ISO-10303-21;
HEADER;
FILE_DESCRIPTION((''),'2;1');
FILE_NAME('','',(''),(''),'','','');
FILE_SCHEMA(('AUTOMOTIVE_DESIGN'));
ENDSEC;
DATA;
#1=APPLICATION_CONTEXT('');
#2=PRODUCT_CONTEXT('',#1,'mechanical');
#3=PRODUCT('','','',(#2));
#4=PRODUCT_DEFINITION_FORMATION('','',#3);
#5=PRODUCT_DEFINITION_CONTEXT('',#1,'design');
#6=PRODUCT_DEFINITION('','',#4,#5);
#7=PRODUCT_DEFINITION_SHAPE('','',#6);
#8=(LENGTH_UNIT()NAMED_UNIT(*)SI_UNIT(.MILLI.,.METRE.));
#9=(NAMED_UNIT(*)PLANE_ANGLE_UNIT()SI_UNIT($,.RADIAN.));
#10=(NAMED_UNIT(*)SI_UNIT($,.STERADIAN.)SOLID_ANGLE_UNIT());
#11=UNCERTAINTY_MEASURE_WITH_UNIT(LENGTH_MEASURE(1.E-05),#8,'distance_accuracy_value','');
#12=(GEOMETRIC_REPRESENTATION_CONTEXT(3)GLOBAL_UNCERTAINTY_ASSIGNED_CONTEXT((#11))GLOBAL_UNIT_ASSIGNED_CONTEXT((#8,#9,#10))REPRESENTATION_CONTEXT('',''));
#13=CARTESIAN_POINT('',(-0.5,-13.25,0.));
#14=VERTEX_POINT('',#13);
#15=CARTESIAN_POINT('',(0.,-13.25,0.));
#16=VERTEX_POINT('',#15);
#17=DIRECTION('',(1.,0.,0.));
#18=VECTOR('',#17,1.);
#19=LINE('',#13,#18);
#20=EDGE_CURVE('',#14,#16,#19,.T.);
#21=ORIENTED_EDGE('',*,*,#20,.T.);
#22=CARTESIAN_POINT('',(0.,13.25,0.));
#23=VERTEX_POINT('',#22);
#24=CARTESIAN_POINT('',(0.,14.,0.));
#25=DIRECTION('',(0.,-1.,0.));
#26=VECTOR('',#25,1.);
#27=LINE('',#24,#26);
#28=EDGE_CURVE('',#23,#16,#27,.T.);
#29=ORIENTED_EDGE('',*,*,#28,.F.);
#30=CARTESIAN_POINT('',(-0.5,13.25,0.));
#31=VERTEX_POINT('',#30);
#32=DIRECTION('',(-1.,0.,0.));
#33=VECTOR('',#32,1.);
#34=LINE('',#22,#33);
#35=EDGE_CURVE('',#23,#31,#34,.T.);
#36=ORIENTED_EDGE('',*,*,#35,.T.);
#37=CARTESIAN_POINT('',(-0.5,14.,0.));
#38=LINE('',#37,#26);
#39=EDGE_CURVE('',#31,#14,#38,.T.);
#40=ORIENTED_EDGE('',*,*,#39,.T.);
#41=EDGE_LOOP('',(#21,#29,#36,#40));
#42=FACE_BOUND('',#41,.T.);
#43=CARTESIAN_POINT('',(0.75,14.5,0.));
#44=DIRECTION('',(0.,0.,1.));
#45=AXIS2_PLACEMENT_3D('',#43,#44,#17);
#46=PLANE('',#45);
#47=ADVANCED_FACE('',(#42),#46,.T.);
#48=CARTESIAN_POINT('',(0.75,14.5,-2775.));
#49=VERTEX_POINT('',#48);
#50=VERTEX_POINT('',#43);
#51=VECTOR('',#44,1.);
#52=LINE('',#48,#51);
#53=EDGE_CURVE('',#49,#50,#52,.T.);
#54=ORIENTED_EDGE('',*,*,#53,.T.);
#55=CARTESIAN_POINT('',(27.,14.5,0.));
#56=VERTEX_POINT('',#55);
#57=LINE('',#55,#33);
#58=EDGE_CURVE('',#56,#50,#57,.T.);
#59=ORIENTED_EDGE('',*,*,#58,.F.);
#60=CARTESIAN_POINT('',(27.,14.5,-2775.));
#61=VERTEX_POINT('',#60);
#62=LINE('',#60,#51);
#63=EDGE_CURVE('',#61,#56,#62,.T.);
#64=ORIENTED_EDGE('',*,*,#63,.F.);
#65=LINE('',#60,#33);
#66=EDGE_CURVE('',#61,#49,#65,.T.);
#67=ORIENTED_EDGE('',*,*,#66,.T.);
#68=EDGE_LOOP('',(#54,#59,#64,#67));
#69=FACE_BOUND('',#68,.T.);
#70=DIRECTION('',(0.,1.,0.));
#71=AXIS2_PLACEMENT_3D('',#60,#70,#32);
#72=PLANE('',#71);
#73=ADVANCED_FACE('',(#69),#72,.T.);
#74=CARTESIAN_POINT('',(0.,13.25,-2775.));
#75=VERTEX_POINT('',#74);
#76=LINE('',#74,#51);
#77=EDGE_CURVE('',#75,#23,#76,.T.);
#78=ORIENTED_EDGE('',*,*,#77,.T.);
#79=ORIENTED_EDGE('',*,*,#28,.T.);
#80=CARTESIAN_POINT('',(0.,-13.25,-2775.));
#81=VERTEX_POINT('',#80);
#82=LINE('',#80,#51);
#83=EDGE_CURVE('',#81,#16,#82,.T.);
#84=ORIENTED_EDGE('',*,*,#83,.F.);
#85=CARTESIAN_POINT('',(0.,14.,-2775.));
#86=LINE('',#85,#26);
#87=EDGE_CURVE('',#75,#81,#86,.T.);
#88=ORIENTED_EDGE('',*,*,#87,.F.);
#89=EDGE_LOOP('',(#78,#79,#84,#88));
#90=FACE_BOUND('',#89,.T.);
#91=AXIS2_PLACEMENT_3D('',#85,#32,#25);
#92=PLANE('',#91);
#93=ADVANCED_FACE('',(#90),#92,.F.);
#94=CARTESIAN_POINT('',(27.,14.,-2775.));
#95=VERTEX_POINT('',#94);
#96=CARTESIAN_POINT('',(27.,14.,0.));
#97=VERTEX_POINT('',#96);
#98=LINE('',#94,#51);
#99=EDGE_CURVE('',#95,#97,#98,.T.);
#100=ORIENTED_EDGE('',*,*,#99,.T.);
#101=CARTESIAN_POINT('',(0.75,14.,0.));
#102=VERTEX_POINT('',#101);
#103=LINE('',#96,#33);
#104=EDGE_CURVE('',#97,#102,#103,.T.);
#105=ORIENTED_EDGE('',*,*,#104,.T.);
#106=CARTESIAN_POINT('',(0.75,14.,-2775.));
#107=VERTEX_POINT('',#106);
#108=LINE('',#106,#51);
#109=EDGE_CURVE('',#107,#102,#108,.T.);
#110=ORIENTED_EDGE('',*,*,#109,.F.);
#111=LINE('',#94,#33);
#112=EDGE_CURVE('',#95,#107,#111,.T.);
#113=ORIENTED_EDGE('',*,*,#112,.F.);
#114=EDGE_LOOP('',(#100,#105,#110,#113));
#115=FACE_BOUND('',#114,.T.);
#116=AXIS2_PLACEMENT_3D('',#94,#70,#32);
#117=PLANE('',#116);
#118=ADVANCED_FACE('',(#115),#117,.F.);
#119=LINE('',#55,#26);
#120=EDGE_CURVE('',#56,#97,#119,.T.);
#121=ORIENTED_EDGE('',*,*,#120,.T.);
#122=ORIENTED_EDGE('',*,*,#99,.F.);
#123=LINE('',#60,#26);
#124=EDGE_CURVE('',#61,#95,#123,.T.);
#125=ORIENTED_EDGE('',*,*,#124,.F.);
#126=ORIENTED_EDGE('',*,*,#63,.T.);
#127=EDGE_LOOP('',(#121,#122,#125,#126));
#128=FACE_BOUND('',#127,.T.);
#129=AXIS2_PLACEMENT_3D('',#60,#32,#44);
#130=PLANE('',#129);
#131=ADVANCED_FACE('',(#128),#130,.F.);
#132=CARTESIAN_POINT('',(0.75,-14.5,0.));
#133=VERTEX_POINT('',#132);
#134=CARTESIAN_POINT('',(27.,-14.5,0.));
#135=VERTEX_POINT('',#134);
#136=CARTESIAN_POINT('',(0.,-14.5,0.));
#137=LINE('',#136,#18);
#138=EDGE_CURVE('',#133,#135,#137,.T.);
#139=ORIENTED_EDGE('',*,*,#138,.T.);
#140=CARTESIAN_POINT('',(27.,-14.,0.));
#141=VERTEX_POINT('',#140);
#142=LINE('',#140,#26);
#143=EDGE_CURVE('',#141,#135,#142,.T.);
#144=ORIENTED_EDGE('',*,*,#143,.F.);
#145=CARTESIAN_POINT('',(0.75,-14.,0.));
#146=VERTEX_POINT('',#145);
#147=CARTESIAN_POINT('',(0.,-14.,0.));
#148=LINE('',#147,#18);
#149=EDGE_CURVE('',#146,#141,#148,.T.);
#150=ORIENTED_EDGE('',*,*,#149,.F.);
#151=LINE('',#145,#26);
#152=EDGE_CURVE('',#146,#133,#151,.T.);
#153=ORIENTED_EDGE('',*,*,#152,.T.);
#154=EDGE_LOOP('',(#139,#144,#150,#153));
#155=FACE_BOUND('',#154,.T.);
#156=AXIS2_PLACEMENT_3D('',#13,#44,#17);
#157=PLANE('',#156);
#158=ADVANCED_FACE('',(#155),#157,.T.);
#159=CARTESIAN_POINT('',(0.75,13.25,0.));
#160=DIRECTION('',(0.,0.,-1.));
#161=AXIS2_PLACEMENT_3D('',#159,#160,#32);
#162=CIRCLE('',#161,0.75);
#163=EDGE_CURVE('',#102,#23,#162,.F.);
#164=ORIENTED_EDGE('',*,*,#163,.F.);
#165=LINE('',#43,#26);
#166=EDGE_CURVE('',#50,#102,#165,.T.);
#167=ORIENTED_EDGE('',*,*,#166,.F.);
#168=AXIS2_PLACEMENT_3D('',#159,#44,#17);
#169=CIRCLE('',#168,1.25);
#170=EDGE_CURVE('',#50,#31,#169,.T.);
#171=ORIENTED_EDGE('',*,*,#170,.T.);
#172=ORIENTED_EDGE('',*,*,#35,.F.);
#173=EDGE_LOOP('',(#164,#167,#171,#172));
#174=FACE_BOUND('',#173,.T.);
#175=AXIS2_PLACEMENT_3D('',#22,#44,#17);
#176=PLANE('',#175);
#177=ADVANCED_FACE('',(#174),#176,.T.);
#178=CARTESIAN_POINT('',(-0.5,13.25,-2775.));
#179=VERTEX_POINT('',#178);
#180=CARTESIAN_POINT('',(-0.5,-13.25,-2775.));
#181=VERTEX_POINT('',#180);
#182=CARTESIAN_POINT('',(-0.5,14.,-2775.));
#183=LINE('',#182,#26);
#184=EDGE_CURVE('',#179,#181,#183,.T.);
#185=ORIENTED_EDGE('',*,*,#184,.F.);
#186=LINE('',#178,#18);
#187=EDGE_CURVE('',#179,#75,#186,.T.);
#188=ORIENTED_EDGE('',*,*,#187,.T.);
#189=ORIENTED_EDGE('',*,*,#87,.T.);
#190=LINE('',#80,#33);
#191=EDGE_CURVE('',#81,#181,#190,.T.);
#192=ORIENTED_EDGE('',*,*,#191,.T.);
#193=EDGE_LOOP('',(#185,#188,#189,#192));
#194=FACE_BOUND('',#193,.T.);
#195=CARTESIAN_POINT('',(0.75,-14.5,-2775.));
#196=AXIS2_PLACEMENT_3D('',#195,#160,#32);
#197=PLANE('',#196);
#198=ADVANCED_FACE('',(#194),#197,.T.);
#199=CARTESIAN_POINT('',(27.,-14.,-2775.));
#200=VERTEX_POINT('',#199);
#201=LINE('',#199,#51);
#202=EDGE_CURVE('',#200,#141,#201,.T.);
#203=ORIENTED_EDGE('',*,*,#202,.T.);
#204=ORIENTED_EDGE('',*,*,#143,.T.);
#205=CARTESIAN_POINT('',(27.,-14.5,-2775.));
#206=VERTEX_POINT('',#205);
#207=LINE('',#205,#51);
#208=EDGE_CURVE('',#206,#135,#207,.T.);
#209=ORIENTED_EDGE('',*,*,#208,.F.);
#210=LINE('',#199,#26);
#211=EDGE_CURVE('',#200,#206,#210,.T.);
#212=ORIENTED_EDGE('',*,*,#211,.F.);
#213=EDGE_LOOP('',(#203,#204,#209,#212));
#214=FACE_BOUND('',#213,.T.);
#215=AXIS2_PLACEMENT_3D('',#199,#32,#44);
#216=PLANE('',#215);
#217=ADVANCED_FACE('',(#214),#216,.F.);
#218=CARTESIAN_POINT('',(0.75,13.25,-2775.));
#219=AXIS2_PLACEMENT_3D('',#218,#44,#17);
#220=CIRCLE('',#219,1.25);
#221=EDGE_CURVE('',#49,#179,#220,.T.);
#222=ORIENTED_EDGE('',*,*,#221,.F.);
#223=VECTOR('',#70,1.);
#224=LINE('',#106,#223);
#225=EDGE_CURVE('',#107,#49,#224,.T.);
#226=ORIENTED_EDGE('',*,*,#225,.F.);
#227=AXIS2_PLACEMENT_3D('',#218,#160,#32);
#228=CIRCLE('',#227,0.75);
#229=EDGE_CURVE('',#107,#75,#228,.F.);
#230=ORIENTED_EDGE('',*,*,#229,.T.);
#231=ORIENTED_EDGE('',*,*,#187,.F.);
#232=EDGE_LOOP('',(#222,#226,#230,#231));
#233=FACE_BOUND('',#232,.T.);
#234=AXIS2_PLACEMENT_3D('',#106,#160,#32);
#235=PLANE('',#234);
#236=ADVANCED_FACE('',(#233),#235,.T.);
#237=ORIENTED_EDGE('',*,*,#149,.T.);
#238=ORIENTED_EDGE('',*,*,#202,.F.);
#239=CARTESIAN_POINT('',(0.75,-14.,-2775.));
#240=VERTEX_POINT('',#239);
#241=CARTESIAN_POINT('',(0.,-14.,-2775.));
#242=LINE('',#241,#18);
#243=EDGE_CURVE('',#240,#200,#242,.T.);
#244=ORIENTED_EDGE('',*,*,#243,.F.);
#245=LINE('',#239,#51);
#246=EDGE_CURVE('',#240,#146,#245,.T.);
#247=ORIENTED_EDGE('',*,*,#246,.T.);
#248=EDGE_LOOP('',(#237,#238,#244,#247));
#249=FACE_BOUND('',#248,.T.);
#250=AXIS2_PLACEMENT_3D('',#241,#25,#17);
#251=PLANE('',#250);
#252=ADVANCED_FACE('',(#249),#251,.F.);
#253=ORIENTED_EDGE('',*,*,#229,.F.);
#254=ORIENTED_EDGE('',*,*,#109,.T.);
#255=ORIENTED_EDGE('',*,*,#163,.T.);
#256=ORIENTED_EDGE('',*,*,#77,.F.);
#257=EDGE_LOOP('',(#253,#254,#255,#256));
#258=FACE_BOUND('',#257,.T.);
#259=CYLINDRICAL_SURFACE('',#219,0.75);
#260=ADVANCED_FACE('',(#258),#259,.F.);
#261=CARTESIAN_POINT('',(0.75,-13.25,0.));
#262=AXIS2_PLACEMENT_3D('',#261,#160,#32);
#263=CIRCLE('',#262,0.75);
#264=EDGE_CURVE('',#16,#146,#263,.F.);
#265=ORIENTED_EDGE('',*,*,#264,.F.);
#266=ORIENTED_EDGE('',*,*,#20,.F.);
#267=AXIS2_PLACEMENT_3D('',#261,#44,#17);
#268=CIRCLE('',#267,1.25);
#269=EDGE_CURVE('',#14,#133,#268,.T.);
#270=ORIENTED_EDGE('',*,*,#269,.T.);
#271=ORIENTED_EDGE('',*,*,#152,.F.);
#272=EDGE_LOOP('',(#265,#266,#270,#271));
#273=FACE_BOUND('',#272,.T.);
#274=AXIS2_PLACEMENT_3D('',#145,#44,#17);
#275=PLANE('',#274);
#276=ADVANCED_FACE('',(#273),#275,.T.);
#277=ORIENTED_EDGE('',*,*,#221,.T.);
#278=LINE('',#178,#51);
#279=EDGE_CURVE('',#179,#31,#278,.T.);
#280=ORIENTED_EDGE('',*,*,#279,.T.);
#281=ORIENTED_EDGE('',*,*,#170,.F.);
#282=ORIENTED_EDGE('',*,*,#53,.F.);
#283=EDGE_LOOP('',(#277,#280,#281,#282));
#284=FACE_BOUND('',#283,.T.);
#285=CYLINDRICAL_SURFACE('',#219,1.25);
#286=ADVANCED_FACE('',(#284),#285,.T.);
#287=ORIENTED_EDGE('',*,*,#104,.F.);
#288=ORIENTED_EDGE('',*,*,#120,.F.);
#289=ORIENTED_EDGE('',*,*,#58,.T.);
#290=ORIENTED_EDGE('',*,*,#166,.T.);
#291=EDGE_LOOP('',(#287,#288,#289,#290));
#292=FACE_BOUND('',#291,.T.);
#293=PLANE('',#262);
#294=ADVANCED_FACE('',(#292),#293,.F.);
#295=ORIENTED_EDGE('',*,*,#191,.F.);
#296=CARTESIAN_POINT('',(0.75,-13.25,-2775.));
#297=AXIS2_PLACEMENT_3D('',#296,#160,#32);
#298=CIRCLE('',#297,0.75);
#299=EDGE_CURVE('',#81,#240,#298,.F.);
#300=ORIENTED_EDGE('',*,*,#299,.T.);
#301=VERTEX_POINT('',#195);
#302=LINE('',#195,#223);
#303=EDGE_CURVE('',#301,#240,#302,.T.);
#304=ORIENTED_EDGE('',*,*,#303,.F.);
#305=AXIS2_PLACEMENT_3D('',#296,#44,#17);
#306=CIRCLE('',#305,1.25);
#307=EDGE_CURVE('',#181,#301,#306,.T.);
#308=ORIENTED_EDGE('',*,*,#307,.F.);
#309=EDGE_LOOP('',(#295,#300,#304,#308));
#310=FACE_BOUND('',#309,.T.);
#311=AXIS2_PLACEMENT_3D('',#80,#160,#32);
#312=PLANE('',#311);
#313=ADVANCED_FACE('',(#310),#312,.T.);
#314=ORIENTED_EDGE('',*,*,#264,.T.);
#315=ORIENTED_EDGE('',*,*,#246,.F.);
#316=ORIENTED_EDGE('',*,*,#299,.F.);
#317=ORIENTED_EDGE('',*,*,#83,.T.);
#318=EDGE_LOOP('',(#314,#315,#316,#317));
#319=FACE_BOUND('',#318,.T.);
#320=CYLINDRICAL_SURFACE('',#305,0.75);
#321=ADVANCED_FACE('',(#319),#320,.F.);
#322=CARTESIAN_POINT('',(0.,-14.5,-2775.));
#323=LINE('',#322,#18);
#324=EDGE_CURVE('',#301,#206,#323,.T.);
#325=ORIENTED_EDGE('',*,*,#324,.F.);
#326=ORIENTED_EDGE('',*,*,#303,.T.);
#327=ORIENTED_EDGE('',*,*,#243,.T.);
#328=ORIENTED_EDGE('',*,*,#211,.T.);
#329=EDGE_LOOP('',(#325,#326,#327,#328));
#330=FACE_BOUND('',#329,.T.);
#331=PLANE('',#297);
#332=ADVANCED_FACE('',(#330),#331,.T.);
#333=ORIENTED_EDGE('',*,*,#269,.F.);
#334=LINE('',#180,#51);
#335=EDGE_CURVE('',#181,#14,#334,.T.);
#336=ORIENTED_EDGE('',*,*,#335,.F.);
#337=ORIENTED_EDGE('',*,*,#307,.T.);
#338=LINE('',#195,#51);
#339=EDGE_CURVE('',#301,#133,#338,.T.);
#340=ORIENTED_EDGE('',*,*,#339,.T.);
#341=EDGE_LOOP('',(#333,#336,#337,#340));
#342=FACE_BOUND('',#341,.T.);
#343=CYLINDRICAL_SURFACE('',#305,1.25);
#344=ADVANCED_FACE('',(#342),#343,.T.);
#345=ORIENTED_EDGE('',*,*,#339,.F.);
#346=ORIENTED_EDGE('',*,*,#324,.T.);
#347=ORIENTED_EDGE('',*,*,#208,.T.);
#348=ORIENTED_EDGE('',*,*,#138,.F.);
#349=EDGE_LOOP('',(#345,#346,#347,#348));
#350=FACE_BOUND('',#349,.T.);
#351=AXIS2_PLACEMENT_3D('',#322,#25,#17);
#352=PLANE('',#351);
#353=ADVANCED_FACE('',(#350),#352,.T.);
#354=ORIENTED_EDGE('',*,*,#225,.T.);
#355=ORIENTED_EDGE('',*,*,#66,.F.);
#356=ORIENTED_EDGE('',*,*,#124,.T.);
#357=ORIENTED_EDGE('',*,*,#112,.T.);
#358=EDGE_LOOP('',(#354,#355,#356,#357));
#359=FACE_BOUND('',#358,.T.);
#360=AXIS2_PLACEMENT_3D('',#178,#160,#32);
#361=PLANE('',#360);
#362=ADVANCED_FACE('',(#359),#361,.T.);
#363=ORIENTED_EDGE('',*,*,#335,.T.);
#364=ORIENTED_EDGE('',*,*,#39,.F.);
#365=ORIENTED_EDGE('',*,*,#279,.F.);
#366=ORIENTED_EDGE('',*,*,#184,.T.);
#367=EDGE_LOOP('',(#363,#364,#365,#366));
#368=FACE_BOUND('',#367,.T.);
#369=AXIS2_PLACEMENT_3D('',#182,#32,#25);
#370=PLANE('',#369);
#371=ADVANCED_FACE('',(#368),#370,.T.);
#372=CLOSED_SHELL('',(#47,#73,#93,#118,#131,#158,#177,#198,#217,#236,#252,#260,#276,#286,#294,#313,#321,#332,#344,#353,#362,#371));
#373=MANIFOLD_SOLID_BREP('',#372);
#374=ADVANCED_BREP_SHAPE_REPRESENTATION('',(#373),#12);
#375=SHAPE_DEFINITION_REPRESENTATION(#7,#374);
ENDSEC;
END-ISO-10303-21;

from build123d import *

# Parameters (mm, degrees)
SM_BASE_FLANGE_1_DEPTH = 2775


# Sheet-metal steps are written as plain solids
with BuildPart() as part:
    # Sketch 1 → Базовая кромка1 (new body)
    with BuildSketch(Plane.XY):
        with BuildLine():
            Line((27, 14), (0.75, 14))
            ThreePointArc((0.75, 14), (0.219669914, 13.780330086), (0, 13.25))
            Line((0, 13.25), (0, -13.25))
            ThreePointArc((0, -13.25), (0.219669914, -13.780330086), (0.75, -14))
            Line((0.75, -14), (27, -14))
            Line((27, -14), (27, -14.5))
            Line((27, -14.5), (0.75, -14.5))
            ThreePointArc((0.75, -14.5), (-0.133883476, -14.133883476), (-0.5, -13.25))
            Line((-0.5, -13.25), (-0.5, 13.25))
            ThreePointArc((-0.5, 13.25), (-0.133883476, 14.133883476), (0.75, 14.5))
            Line((0.75, 14.5), (27, 14.5))
            Line((27, 14.5), (27, 14))
        make_face()
    extrude(amount=-SM_BASE_FLANGE_1_DEPTH)


solid = part.part
